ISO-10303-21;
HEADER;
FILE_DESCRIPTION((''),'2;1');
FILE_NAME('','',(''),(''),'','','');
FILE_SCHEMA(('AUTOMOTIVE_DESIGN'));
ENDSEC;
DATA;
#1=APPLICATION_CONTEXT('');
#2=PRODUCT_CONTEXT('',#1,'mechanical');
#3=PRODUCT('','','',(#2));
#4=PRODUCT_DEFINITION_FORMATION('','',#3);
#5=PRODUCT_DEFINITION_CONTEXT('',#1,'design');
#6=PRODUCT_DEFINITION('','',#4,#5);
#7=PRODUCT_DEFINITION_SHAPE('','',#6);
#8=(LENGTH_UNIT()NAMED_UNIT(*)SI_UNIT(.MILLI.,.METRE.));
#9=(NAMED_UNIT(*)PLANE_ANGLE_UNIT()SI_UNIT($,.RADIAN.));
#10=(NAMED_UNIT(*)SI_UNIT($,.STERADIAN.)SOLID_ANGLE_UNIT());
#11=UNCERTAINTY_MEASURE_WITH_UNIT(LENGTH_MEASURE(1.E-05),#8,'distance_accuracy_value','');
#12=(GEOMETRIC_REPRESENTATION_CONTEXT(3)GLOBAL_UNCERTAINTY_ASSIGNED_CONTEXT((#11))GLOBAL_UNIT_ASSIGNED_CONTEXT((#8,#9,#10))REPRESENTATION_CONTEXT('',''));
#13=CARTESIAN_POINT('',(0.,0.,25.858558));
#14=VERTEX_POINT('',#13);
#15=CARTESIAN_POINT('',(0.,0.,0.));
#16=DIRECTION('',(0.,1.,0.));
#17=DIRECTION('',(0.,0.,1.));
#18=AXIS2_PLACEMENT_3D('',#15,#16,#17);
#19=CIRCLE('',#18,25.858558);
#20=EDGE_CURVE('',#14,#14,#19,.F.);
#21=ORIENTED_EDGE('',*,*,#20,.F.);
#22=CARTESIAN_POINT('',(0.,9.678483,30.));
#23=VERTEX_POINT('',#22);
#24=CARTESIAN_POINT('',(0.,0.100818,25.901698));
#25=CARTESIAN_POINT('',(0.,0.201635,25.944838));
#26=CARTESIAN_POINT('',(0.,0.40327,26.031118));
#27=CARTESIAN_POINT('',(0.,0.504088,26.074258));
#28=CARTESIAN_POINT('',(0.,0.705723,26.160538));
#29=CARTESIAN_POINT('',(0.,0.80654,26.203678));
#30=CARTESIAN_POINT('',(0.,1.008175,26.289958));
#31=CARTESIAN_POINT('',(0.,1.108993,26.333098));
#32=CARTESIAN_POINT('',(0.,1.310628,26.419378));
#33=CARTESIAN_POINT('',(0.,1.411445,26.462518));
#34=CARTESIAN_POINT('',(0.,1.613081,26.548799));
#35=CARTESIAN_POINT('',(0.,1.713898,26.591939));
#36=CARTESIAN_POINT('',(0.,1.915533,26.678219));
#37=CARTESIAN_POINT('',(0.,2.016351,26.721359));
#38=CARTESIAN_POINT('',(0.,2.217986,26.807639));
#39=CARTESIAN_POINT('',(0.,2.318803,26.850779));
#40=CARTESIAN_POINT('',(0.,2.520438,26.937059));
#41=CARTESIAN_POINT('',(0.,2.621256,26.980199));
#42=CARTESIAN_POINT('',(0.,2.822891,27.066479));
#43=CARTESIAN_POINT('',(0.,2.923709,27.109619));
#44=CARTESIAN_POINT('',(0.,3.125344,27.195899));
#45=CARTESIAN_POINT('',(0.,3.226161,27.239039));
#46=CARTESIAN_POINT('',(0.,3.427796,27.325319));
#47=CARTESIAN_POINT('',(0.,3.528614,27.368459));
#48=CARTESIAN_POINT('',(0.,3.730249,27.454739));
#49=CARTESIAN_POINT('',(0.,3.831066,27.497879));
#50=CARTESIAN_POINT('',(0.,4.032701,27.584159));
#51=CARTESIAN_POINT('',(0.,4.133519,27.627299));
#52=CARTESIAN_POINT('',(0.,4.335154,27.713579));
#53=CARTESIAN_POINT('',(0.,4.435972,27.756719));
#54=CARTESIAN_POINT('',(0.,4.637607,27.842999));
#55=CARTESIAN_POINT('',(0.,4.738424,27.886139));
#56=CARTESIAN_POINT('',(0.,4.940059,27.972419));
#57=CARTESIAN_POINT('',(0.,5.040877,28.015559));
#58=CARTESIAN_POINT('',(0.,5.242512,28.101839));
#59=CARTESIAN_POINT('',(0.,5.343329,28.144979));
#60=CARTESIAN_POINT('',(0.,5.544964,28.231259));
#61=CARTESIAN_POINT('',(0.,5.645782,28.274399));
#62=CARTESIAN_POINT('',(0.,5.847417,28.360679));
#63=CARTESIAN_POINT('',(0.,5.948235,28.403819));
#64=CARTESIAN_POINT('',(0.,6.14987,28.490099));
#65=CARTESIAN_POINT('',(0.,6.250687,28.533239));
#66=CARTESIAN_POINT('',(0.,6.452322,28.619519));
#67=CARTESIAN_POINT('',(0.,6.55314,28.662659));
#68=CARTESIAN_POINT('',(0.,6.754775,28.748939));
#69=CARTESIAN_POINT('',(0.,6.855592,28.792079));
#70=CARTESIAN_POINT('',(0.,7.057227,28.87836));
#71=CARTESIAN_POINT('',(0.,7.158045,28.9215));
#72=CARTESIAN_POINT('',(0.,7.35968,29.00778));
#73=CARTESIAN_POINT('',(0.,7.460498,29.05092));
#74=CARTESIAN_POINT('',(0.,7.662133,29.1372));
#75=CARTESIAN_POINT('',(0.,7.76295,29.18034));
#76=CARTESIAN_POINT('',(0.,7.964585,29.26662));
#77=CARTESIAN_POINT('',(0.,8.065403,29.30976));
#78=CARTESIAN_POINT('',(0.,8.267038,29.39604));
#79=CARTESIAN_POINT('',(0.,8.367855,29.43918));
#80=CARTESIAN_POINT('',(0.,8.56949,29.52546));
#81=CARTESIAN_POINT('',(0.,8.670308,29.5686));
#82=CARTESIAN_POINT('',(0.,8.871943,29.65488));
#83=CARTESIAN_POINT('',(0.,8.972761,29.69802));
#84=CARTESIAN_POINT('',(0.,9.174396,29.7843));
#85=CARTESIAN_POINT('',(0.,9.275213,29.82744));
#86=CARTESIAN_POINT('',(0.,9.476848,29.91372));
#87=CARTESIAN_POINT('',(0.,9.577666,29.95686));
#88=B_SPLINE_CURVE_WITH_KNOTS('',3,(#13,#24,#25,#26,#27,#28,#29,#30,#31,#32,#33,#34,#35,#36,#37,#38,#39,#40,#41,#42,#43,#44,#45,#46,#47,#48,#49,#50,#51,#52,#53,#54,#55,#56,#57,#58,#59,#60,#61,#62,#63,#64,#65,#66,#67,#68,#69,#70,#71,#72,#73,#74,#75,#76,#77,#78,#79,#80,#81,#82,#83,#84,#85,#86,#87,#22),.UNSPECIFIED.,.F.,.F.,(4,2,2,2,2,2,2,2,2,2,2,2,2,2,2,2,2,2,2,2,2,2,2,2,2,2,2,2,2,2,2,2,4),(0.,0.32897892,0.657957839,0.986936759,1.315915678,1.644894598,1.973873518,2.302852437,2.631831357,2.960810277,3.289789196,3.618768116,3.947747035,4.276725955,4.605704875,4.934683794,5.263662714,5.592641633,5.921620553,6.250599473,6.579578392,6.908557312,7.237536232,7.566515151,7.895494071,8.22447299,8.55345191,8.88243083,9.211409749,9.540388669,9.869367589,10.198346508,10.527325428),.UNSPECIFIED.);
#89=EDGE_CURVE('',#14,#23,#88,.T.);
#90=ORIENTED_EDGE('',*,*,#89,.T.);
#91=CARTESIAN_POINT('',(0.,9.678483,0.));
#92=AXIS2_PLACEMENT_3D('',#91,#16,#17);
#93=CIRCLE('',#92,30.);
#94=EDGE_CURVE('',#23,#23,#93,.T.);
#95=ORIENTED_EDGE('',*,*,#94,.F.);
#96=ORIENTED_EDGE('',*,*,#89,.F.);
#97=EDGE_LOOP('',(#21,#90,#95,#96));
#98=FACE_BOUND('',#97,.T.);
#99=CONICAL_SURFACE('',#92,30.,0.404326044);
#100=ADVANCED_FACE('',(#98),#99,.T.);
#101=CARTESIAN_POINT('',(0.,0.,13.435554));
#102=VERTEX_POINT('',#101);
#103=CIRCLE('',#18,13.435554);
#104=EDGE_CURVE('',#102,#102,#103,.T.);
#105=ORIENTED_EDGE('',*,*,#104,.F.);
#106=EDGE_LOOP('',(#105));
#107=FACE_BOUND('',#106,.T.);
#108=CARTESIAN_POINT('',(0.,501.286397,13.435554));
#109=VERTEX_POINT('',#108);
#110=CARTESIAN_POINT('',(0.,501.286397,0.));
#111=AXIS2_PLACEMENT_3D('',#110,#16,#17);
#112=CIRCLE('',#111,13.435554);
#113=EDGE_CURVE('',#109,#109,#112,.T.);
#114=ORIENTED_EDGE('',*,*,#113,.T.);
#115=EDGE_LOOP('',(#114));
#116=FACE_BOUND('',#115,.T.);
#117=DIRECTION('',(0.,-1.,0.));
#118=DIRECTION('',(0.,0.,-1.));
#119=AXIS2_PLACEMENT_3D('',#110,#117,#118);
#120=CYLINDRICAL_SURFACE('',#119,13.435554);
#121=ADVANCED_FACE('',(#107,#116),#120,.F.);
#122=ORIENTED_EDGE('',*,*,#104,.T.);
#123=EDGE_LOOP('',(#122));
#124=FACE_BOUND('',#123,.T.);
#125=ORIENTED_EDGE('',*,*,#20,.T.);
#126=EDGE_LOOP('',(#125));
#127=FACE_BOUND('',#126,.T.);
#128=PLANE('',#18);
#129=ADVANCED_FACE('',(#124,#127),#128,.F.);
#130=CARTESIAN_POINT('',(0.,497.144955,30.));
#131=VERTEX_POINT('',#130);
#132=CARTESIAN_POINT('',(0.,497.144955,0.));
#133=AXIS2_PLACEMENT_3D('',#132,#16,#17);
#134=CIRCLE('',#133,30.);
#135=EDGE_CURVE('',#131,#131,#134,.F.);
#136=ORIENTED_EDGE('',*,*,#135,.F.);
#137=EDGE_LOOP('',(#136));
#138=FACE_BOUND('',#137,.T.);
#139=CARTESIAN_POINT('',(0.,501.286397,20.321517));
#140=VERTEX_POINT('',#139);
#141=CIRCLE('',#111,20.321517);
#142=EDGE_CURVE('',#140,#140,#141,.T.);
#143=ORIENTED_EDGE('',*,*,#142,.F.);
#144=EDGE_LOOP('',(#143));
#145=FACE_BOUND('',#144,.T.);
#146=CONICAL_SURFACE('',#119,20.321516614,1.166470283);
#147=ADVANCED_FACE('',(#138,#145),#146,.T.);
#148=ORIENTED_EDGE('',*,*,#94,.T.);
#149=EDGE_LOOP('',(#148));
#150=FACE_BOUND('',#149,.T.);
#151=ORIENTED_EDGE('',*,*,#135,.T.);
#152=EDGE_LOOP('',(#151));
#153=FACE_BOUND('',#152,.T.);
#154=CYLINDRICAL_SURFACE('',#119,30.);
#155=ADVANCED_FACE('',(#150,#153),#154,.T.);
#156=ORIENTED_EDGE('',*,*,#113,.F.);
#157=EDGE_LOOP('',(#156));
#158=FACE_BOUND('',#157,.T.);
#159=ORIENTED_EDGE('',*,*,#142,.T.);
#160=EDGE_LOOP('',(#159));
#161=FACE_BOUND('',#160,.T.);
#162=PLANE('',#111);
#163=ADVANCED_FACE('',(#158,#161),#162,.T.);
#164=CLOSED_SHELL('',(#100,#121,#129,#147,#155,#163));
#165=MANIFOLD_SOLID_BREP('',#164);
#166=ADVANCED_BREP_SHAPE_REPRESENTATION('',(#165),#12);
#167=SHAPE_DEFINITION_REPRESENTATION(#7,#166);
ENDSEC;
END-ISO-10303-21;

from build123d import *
from OCP.BRepFilletAPI import BRepFilletAPI_MakeChamfer

# Parameters (mm, degrees)
SKETCH1_R           = 30
BOSS_EXTRUDE1_DEPTH = 501.28639667
SKETCH2_R           = 13.435553616
CUT_EXTRUDE1_DEPTH  = 504.078573869
CHAMFER1_SIZE       = 4.14144178
CHAMFER1_SIZE2      = 9.678483386


with BuildPart() as part:
    # Sketch1 → Boss-Extrude1 (new body)
    with BuildSketch(Plane(origin=(0, 0, 0), x_dir=(1, 0, 0), z_dir=(0, 1, 0))):
        Circle(SKETCH1_R)
    extrude(amount=BOSS_EXTRUDE1_DEPTH)

    # Sketch2 → Cut-Extrude1 (cut, through all)
    with BuildSketch(Plane(origin=(0, 0, 0), x_dir=(1, 0, 0), z_dir=(0, 1, 0))):
        Circle(SKETCH2_R)
    extrude(amount=CUT_EXTRUDE1_DEPTH, mode=Mode.SUBTRACT)

    # Chamfer1: one chamfer whose edges measure the first distance from different faces: ONE call of the kernel's chamfer builder (chamfer() names one face for all edges)
    chamfer1_edges_1 = [part.edges().sort_by_distance(p)[0] for p in [
        (-30, 501.28639667, 0),
    ]]
    chamfer1_side_1 = [part.faces().sort_by_distance(p)[0] for p in [
        (-30, 250.643198335, 0),
    ]]
    chamfer1_edges_2 = [part.edges().sort_by_distance(p)[0] for p in [
        (-30, 0, 0),
    ]]
    chamfer1_side_2 = [part.faces().sort_by_distance(p)[0] for p in [
        (-29.151471863, 0, 0),
    ]]
    chamfer1 = BRepFilletAPI_MakeChamfer(part.part.solid().wrapped)
    for e in chamfer1_edges_1:
        chamfer1.Add(CHAMFER1_SIZE, CHAMFER1_SIZE2, e.wrapped, chamfer1_side_1[0].wrapped)  # the first distance lies on this face
    for e in chamfer1_edges_2:
        chamfer1.Add(CHAMFER1_SIZE, CHAMFER1_SIZE2, e.wrapped, chamfer1_side_2[0].wrapped)  # the first distance lies on this face
    add(Compound.cast(chamfer1.Shape()), mode=Mode.REPLACE)


solid = part.part
